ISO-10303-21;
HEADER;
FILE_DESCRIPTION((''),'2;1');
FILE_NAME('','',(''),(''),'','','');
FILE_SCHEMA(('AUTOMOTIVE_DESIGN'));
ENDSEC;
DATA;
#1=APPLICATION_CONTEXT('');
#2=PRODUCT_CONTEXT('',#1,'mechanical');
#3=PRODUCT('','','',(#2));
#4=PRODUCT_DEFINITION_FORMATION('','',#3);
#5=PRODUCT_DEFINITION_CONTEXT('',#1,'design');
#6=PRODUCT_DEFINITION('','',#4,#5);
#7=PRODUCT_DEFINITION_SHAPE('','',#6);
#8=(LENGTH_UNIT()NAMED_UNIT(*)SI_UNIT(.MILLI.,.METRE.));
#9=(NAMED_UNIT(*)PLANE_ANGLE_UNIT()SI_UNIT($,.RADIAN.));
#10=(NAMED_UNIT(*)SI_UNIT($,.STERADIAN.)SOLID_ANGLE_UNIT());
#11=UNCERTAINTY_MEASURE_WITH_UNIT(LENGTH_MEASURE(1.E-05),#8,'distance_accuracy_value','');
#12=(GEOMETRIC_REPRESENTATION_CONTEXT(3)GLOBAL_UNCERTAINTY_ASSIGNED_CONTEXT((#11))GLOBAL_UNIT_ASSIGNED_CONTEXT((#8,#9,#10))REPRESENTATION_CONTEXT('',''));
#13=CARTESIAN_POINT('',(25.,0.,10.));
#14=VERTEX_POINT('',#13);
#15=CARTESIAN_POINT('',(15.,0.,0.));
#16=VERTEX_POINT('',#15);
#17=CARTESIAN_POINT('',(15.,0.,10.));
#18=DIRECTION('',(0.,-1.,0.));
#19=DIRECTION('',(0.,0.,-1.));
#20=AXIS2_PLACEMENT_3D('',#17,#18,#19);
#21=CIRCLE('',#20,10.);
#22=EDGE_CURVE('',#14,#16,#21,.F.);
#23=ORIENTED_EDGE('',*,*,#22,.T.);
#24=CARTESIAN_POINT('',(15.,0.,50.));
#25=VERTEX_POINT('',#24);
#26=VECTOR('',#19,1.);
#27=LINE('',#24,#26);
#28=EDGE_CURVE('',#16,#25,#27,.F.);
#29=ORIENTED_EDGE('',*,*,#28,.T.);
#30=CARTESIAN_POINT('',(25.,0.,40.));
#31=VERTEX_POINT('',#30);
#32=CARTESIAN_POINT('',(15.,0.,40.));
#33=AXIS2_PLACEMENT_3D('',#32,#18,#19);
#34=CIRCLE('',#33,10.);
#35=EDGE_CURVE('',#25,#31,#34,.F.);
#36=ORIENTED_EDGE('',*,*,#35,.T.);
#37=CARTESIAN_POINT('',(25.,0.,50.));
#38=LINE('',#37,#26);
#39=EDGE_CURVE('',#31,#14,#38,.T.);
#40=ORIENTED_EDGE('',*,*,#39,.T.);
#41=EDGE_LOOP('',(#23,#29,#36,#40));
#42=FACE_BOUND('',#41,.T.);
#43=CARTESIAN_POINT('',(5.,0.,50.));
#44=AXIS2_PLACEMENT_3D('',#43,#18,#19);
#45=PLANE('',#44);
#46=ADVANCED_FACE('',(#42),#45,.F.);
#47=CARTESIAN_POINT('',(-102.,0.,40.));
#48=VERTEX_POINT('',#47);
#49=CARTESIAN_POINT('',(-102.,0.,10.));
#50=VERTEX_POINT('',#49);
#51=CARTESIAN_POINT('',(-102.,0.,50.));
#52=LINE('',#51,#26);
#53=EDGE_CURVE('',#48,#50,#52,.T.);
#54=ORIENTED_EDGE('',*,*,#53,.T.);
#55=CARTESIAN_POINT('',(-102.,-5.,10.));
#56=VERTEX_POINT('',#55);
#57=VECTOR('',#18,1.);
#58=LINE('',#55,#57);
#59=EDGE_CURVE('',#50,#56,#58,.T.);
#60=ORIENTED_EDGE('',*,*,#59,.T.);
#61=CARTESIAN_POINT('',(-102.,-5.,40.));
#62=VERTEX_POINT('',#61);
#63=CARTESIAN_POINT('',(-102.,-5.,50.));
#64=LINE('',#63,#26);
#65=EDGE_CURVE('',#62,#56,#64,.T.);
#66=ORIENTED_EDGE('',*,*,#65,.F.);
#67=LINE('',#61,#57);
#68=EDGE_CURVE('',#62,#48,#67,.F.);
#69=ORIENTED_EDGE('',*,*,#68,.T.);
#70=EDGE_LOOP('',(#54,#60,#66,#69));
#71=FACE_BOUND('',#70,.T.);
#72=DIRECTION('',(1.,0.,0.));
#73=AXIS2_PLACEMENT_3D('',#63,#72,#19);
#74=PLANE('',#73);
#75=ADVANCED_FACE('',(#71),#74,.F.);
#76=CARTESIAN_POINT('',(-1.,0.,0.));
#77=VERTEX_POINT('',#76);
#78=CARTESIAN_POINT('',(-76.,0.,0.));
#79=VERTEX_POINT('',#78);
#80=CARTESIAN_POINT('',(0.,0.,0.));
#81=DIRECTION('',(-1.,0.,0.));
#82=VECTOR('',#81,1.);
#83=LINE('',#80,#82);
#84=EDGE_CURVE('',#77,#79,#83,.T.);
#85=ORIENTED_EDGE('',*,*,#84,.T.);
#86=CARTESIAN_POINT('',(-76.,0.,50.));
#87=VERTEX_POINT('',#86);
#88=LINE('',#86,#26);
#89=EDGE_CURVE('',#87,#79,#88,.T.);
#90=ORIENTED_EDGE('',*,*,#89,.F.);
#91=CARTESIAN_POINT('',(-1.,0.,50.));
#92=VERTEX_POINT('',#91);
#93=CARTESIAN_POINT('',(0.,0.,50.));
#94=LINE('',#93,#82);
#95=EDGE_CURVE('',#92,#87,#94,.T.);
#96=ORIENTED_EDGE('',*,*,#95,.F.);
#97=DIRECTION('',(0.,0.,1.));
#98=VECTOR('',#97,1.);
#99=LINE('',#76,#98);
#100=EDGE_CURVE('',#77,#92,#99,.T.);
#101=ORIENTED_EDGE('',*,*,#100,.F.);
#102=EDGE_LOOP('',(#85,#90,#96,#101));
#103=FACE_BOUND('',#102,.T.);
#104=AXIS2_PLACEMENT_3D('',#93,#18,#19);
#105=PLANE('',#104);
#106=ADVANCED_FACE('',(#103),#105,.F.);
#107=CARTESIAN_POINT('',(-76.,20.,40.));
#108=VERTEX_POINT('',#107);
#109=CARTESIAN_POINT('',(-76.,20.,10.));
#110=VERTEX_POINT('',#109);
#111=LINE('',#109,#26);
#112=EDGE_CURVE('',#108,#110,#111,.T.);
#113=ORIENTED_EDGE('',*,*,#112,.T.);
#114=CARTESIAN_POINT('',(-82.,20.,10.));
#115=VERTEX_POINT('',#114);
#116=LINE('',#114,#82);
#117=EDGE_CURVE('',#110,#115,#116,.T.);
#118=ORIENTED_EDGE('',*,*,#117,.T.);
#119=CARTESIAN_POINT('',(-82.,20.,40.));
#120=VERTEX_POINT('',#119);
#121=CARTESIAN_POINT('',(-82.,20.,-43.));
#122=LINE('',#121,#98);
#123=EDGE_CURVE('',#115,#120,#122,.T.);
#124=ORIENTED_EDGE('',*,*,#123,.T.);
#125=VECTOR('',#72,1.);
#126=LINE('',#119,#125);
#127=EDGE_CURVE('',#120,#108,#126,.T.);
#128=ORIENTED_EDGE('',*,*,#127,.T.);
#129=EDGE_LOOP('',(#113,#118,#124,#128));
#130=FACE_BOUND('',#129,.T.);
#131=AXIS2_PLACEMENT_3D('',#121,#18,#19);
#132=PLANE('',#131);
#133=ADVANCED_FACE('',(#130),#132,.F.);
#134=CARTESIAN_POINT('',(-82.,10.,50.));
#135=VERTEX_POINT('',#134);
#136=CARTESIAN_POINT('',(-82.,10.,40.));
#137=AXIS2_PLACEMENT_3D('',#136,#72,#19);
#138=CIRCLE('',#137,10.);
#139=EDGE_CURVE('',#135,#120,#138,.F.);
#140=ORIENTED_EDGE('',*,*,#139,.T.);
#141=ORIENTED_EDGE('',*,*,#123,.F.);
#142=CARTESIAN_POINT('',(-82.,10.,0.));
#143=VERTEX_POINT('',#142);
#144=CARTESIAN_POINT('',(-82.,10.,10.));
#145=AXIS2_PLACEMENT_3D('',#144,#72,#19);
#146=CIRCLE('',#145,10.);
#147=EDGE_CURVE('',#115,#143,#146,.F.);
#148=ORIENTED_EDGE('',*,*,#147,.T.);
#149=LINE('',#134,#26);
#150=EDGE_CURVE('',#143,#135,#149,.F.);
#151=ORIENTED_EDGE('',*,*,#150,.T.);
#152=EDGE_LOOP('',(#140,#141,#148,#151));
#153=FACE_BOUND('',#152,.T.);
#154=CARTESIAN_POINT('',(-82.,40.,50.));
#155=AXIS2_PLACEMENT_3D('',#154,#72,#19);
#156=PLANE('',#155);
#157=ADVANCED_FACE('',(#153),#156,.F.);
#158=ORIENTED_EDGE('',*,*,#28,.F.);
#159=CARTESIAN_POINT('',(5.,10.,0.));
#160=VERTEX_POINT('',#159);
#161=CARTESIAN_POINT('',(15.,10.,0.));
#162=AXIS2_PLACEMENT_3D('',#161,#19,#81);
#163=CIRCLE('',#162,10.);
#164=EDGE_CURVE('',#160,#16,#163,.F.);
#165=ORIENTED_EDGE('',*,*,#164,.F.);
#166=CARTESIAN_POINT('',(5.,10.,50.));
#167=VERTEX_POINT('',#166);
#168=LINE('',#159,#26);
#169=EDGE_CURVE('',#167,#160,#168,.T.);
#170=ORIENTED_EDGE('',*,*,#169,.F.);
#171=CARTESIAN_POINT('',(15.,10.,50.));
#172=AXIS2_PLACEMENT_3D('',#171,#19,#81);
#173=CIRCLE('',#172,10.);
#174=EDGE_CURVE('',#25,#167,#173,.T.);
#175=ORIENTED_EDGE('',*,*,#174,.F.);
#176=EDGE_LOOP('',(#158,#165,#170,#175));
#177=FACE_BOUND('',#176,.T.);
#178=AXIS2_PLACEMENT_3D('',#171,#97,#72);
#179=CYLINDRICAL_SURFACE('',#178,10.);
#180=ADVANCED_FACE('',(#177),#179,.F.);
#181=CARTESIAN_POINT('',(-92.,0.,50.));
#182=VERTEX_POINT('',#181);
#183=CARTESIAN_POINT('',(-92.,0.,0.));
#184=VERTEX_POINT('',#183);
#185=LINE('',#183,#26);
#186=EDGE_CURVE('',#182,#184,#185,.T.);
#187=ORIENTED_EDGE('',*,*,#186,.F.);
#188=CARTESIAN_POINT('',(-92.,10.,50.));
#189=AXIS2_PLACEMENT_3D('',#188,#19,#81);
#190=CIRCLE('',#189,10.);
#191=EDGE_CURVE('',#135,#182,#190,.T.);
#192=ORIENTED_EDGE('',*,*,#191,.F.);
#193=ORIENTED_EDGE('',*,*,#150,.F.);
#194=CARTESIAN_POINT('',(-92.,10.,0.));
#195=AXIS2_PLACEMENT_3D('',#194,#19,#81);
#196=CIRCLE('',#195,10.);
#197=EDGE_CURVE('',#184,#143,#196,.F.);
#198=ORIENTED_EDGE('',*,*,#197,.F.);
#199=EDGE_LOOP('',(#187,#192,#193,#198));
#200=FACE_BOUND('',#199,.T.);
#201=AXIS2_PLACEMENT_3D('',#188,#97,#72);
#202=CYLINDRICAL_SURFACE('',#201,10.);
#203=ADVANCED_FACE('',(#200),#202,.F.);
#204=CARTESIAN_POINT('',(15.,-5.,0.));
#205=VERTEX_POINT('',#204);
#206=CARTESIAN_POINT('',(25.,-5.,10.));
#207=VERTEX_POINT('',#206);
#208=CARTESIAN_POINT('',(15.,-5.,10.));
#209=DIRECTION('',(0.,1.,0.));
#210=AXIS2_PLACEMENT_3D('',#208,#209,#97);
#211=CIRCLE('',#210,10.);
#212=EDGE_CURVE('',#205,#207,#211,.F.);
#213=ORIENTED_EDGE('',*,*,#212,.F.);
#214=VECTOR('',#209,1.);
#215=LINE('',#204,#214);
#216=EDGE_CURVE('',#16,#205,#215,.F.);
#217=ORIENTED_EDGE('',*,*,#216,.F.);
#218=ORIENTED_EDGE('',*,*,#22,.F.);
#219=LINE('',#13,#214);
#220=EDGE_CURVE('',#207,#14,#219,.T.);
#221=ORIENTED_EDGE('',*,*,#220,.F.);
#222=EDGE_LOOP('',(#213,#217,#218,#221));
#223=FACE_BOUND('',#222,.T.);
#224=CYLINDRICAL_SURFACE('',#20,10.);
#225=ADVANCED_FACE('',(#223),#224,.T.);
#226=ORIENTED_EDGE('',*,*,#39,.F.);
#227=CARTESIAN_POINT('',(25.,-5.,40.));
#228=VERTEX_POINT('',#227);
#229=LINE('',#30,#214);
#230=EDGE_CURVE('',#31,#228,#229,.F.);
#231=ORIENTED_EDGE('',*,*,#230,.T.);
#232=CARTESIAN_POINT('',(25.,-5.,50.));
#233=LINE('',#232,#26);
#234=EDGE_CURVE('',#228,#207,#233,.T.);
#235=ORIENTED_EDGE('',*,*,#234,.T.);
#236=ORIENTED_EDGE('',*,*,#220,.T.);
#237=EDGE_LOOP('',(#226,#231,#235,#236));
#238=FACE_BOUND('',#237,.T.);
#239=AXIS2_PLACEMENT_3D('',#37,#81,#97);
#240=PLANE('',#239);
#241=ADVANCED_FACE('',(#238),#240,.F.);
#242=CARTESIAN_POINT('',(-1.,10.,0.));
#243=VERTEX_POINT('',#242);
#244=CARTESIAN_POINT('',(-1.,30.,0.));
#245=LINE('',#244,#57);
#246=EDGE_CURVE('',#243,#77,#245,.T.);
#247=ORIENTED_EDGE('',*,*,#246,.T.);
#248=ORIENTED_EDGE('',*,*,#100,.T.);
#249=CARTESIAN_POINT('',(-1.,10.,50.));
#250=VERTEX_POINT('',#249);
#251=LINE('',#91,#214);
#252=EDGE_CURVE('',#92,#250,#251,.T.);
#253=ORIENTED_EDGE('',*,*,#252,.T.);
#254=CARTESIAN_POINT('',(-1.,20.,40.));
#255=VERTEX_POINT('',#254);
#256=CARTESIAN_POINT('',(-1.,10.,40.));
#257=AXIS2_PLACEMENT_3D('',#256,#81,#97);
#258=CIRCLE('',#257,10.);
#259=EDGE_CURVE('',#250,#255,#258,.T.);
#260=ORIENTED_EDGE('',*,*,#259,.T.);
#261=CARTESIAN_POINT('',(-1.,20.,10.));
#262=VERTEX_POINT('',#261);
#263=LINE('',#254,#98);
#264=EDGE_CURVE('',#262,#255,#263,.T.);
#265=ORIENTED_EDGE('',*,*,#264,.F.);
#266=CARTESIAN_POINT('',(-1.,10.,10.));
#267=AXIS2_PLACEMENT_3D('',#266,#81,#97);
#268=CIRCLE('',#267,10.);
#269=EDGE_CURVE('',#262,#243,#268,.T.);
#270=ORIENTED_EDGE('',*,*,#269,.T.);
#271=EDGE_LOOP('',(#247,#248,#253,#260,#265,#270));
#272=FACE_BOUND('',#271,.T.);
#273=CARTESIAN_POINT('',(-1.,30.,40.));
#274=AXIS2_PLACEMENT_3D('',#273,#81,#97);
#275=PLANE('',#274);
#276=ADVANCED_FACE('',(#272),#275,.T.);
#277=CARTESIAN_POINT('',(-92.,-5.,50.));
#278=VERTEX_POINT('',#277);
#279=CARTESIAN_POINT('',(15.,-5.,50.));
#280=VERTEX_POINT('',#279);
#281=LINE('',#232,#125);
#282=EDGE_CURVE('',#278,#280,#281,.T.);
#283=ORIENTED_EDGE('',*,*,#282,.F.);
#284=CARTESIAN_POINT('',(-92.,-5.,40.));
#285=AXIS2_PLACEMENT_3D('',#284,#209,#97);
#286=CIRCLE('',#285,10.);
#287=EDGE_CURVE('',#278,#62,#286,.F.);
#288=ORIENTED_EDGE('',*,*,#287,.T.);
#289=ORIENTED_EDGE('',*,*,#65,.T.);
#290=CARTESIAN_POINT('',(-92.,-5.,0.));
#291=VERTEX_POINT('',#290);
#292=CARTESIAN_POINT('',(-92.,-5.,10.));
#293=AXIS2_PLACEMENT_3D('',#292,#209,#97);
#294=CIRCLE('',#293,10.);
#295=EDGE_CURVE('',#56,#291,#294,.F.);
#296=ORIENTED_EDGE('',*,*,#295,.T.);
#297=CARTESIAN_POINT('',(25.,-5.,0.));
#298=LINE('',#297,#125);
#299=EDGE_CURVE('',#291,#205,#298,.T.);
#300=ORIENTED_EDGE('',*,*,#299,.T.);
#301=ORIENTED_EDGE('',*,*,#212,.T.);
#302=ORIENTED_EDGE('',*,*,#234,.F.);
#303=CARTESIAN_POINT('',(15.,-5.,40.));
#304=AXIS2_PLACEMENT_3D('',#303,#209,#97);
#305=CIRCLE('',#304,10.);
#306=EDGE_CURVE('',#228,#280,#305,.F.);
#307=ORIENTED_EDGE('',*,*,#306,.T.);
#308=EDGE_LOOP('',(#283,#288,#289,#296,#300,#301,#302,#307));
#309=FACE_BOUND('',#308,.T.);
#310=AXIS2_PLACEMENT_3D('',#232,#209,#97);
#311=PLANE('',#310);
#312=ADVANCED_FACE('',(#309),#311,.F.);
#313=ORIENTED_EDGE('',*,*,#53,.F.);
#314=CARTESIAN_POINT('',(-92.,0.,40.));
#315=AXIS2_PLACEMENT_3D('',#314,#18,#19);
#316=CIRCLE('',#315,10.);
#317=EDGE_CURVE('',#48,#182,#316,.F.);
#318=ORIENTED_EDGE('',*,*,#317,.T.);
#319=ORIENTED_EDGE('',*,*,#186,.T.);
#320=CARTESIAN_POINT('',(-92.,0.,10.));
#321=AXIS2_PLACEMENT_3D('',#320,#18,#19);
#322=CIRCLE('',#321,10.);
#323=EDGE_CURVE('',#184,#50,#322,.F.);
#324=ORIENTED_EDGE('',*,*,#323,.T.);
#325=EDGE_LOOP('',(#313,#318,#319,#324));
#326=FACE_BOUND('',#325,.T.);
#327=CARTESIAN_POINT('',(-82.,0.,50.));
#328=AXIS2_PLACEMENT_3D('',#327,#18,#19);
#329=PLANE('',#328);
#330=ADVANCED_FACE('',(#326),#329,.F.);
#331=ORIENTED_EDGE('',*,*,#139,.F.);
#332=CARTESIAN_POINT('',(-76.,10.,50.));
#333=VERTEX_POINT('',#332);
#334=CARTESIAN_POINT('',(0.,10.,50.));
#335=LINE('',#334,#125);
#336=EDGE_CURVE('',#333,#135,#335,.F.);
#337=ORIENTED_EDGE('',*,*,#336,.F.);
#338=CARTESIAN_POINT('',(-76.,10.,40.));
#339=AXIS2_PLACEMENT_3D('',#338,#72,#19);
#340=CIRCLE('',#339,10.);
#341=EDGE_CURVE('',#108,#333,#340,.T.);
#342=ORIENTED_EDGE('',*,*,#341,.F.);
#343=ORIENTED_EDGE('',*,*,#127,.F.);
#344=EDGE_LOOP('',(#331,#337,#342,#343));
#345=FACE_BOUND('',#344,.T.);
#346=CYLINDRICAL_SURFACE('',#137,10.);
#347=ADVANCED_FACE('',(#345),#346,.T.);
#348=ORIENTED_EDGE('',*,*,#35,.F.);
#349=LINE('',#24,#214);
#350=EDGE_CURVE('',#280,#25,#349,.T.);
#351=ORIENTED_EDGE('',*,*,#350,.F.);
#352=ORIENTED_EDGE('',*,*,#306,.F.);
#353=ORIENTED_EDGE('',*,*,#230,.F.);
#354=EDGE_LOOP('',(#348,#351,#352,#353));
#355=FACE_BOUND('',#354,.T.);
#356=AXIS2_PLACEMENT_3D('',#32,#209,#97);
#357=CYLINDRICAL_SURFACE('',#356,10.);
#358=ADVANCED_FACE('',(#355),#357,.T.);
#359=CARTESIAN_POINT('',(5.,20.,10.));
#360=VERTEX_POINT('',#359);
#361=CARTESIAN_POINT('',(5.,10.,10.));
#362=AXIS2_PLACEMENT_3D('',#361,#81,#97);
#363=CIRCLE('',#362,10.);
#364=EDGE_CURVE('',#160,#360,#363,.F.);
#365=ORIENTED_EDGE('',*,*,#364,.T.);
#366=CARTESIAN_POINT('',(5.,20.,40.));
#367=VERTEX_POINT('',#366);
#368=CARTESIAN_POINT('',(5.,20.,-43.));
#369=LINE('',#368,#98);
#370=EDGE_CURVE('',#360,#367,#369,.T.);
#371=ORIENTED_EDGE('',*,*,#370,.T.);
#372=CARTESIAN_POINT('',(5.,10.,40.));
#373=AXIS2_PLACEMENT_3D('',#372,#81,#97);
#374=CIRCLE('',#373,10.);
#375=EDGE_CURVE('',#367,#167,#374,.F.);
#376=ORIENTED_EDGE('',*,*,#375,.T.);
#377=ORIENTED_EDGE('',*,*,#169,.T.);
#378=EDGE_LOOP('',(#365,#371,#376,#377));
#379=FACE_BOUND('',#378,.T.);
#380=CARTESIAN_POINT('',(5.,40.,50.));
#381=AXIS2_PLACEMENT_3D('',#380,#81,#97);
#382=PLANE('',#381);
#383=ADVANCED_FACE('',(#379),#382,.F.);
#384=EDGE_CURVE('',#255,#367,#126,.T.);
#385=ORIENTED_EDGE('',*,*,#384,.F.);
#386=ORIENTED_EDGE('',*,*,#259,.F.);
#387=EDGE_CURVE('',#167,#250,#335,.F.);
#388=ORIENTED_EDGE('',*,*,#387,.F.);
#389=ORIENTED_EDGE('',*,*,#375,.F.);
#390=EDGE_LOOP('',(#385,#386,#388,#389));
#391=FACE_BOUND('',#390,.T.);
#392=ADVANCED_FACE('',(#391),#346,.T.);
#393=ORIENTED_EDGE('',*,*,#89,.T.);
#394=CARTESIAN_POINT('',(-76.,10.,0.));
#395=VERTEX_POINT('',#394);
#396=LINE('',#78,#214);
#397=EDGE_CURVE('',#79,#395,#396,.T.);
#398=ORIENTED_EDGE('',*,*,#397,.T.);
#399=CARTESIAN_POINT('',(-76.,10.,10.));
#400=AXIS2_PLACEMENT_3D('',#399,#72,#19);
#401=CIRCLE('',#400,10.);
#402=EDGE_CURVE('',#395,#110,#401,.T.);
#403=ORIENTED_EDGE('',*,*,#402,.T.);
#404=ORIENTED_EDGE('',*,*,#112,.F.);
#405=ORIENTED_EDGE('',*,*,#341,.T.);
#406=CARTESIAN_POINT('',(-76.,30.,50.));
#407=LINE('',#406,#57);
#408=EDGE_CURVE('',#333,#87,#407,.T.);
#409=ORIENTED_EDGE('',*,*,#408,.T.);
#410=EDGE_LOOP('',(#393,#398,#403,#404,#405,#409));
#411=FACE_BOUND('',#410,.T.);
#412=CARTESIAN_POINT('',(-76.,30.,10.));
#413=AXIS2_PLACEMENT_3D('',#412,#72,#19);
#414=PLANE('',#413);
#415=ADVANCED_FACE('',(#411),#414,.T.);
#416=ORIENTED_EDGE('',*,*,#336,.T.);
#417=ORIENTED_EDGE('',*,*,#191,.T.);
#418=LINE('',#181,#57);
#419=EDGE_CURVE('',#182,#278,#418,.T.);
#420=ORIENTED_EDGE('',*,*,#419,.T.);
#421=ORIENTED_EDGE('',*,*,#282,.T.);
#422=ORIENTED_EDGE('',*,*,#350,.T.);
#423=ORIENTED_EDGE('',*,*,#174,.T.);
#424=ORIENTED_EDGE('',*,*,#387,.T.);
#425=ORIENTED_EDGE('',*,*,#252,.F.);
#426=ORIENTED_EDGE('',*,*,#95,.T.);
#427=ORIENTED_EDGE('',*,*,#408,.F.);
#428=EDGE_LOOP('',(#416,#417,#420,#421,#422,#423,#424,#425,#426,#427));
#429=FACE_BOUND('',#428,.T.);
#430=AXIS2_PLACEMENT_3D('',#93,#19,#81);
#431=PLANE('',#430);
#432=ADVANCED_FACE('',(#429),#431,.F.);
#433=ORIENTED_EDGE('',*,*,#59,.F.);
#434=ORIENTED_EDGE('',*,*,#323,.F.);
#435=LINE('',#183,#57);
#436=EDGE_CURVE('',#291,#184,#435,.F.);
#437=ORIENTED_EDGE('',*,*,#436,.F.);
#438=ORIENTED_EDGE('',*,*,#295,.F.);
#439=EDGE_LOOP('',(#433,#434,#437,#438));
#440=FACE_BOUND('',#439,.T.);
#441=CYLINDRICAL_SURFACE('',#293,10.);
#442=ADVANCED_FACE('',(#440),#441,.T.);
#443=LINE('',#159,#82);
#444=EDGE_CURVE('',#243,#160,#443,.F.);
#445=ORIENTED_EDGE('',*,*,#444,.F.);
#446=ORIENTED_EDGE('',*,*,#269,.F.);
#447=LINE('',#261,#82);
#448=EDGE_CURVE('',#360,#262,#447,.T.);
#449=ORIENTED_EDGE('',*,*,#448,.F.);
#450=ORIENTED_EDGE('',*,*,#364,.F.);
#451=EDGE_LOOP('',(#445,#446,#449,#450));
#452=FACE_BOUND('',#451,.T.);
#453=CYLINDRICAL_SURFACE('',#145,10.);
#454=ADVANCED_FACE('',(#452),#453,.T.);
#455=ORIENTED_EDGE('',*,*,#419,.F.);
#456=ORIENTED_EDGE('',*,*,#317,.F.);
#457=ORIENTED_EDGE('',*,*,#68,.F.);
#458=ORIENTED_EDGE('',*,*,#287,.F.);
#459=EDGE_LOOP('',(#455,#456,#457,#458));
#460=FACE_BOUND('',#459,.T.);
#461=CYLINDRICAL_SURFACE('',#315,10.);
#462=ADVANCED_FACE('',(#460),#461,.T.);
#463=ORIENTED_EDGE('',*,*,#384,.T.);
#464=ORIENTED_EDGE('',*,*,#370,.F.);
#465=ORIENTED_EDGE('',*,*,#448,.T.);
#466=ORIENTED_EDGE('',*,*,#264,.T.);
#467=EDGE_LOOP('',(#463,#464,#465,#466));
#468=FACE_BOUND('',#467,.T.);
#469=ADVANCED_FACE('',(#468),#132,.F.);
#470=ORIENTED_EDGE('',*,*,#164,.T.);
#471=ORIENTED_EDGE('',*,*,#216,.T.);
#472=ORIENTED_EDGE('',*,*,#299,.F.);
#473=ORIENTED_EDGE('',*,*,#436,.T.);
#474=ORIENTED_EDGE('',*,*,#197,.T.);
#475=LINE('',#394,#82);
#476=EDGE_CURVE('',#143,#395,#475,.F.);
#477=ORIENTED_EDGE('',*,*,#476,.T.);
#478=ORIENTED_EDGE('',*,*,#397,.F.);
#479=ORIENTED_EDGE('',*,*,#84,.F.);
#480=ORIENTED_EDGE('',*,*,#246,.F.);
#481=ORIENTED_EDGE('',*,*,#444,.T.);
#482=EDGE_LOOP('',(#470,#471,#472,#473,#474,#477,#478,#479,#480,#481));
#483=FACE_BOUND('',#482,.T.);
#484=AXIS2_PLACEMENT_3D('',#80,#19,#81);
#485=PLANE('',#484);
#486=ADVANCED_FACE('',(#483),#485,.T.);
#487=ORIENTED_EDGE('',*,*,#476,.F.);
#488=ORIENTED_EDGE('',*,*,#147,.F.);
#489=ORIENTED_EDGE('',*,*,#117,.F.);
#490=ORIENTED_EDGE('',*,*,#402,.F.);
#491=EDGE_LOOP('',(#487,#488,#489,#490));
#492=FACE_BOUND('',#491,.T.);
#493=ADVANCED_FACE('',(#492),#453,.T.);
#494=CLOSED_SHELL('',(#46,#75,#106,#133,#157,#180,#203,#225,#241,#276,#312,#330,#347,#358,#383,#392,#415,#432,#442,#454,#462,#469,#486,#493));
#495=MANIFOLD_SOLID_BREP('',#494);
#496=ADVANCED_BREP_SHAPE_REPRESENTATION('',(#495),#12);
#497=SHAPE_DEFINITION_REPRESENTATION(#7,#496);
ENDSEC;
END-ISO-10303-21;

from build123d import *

# Parameters (mm, degrees)
BOSS_EXTRUDE1_DEPTH = 50
FILLET1_R           = 10
BOSS_EXTRUDE2_DEPTH = 1
BOSS_EXTRUDE3_START = 1
BOSS_EXTRUDE3_DEPTH = 1
SKETCH4_W           = 87
SKETCH4_H           = 20
CUT_EXTRUDE1_DEPTH  = 93
FILLET2_R           = 10


with BuildPart() as part:
    # Sketch1 → Boss-Extrude1 (new body)
    with BuildSketch(Plane.XY):
        Polygon((0, 0), (-77, 0), (-77, 40), (-82, 40), (-82, 0), (-102, 0), (-102, -5), (25, -5), (25, 0), (5, 0), (5, 40), (0, 40), align=None)
    extrude(amount=BOSS_EXTRUDE1_DEPTH)

    # Fillet1
    fillet1_edges = [part.edges().sort_by_distance(p)[0] for p in [
        (25, -2.5, 0),
        (25, -2.5, 50),
        (-102, -2.5, 0),
        (-102, -2.5, 50),
        (2.5, 40, 50),
        (2.5, 40, 0),
        (-79.5, 40, 0),
        (-79.5, 40, 50),
        (-82, 0, 25),
        (5, 0, 25),
    ]]
    fillet(fillet1_edges, radius=FILLET1_R - 0.0001)  # a hair under: the kernel refuses the full size

    # Sketch2 → Boss-Extrude2 (add)
    with BuildSketch(Plane(origin=(-77, 0, 0), x_dir=(0, 0, -1), z_dir=(1, 0, 0))):
        with BuildLine():
            Line((0, 0), (0, 30))
            ThreePointArc((0, 30), (-2.928932188, 37.071067812), (-10, 40))
            Line((-10, 40), (-40, 40))
            ThreePointArc((-40, 40), (-47.071067812, 37.071067812), (-50, 30))
            Line((-50, 30), (-50, 0))
            Line((-50, 0), (0, 0))
        make_face()
    extrude(amount=BOSS_EXTRUDE2_DEPTH)

    # Sketch3 → Boss-Extrude3 (add)
    with BuildSketch(Plane.ZY.offset(BOSS_EXTRUDE3_START)):
        with BuildLine():
            Line((50, 0), (50, 30))
            ThreePointArc((50, 30), (47.071067812, 37.071067812), (40, 40))
            Line((40, 40), (10, 40))
            ThreePointArc((10, 40), (2.928932188, 37.071067812), (0, 30))
            Line((0, 30), (0, 0))
            Line((0, 0), (50, 0))
        make_face()
    extrude(amount=-BOSS_EXTRUDE3_DEPTH)

    # Sketch4 → Cut-Extrude1 (cut)
    with BuildSketch(Plane.XY.offset(50)):
        with Locations((-38.5, 30)):
            Rectangle(SKETCH4_W, SKETCH4_H)
    extrude(amount=-CUT_EXTRUDE1_DEPTH, mode=Mode.SUBTRACT)

    # Fillet2
    fillet2_edges = [part.edges().sort_by_distance(p)[0] for p in [
        (2, 20, 0),
        (2, 20, 50),
        (-79, 20, 0),
        (-79, 20, 50),
    ]]
    fillet(fillet2_edges, radius=FILLET2_R)


solid = part.part
